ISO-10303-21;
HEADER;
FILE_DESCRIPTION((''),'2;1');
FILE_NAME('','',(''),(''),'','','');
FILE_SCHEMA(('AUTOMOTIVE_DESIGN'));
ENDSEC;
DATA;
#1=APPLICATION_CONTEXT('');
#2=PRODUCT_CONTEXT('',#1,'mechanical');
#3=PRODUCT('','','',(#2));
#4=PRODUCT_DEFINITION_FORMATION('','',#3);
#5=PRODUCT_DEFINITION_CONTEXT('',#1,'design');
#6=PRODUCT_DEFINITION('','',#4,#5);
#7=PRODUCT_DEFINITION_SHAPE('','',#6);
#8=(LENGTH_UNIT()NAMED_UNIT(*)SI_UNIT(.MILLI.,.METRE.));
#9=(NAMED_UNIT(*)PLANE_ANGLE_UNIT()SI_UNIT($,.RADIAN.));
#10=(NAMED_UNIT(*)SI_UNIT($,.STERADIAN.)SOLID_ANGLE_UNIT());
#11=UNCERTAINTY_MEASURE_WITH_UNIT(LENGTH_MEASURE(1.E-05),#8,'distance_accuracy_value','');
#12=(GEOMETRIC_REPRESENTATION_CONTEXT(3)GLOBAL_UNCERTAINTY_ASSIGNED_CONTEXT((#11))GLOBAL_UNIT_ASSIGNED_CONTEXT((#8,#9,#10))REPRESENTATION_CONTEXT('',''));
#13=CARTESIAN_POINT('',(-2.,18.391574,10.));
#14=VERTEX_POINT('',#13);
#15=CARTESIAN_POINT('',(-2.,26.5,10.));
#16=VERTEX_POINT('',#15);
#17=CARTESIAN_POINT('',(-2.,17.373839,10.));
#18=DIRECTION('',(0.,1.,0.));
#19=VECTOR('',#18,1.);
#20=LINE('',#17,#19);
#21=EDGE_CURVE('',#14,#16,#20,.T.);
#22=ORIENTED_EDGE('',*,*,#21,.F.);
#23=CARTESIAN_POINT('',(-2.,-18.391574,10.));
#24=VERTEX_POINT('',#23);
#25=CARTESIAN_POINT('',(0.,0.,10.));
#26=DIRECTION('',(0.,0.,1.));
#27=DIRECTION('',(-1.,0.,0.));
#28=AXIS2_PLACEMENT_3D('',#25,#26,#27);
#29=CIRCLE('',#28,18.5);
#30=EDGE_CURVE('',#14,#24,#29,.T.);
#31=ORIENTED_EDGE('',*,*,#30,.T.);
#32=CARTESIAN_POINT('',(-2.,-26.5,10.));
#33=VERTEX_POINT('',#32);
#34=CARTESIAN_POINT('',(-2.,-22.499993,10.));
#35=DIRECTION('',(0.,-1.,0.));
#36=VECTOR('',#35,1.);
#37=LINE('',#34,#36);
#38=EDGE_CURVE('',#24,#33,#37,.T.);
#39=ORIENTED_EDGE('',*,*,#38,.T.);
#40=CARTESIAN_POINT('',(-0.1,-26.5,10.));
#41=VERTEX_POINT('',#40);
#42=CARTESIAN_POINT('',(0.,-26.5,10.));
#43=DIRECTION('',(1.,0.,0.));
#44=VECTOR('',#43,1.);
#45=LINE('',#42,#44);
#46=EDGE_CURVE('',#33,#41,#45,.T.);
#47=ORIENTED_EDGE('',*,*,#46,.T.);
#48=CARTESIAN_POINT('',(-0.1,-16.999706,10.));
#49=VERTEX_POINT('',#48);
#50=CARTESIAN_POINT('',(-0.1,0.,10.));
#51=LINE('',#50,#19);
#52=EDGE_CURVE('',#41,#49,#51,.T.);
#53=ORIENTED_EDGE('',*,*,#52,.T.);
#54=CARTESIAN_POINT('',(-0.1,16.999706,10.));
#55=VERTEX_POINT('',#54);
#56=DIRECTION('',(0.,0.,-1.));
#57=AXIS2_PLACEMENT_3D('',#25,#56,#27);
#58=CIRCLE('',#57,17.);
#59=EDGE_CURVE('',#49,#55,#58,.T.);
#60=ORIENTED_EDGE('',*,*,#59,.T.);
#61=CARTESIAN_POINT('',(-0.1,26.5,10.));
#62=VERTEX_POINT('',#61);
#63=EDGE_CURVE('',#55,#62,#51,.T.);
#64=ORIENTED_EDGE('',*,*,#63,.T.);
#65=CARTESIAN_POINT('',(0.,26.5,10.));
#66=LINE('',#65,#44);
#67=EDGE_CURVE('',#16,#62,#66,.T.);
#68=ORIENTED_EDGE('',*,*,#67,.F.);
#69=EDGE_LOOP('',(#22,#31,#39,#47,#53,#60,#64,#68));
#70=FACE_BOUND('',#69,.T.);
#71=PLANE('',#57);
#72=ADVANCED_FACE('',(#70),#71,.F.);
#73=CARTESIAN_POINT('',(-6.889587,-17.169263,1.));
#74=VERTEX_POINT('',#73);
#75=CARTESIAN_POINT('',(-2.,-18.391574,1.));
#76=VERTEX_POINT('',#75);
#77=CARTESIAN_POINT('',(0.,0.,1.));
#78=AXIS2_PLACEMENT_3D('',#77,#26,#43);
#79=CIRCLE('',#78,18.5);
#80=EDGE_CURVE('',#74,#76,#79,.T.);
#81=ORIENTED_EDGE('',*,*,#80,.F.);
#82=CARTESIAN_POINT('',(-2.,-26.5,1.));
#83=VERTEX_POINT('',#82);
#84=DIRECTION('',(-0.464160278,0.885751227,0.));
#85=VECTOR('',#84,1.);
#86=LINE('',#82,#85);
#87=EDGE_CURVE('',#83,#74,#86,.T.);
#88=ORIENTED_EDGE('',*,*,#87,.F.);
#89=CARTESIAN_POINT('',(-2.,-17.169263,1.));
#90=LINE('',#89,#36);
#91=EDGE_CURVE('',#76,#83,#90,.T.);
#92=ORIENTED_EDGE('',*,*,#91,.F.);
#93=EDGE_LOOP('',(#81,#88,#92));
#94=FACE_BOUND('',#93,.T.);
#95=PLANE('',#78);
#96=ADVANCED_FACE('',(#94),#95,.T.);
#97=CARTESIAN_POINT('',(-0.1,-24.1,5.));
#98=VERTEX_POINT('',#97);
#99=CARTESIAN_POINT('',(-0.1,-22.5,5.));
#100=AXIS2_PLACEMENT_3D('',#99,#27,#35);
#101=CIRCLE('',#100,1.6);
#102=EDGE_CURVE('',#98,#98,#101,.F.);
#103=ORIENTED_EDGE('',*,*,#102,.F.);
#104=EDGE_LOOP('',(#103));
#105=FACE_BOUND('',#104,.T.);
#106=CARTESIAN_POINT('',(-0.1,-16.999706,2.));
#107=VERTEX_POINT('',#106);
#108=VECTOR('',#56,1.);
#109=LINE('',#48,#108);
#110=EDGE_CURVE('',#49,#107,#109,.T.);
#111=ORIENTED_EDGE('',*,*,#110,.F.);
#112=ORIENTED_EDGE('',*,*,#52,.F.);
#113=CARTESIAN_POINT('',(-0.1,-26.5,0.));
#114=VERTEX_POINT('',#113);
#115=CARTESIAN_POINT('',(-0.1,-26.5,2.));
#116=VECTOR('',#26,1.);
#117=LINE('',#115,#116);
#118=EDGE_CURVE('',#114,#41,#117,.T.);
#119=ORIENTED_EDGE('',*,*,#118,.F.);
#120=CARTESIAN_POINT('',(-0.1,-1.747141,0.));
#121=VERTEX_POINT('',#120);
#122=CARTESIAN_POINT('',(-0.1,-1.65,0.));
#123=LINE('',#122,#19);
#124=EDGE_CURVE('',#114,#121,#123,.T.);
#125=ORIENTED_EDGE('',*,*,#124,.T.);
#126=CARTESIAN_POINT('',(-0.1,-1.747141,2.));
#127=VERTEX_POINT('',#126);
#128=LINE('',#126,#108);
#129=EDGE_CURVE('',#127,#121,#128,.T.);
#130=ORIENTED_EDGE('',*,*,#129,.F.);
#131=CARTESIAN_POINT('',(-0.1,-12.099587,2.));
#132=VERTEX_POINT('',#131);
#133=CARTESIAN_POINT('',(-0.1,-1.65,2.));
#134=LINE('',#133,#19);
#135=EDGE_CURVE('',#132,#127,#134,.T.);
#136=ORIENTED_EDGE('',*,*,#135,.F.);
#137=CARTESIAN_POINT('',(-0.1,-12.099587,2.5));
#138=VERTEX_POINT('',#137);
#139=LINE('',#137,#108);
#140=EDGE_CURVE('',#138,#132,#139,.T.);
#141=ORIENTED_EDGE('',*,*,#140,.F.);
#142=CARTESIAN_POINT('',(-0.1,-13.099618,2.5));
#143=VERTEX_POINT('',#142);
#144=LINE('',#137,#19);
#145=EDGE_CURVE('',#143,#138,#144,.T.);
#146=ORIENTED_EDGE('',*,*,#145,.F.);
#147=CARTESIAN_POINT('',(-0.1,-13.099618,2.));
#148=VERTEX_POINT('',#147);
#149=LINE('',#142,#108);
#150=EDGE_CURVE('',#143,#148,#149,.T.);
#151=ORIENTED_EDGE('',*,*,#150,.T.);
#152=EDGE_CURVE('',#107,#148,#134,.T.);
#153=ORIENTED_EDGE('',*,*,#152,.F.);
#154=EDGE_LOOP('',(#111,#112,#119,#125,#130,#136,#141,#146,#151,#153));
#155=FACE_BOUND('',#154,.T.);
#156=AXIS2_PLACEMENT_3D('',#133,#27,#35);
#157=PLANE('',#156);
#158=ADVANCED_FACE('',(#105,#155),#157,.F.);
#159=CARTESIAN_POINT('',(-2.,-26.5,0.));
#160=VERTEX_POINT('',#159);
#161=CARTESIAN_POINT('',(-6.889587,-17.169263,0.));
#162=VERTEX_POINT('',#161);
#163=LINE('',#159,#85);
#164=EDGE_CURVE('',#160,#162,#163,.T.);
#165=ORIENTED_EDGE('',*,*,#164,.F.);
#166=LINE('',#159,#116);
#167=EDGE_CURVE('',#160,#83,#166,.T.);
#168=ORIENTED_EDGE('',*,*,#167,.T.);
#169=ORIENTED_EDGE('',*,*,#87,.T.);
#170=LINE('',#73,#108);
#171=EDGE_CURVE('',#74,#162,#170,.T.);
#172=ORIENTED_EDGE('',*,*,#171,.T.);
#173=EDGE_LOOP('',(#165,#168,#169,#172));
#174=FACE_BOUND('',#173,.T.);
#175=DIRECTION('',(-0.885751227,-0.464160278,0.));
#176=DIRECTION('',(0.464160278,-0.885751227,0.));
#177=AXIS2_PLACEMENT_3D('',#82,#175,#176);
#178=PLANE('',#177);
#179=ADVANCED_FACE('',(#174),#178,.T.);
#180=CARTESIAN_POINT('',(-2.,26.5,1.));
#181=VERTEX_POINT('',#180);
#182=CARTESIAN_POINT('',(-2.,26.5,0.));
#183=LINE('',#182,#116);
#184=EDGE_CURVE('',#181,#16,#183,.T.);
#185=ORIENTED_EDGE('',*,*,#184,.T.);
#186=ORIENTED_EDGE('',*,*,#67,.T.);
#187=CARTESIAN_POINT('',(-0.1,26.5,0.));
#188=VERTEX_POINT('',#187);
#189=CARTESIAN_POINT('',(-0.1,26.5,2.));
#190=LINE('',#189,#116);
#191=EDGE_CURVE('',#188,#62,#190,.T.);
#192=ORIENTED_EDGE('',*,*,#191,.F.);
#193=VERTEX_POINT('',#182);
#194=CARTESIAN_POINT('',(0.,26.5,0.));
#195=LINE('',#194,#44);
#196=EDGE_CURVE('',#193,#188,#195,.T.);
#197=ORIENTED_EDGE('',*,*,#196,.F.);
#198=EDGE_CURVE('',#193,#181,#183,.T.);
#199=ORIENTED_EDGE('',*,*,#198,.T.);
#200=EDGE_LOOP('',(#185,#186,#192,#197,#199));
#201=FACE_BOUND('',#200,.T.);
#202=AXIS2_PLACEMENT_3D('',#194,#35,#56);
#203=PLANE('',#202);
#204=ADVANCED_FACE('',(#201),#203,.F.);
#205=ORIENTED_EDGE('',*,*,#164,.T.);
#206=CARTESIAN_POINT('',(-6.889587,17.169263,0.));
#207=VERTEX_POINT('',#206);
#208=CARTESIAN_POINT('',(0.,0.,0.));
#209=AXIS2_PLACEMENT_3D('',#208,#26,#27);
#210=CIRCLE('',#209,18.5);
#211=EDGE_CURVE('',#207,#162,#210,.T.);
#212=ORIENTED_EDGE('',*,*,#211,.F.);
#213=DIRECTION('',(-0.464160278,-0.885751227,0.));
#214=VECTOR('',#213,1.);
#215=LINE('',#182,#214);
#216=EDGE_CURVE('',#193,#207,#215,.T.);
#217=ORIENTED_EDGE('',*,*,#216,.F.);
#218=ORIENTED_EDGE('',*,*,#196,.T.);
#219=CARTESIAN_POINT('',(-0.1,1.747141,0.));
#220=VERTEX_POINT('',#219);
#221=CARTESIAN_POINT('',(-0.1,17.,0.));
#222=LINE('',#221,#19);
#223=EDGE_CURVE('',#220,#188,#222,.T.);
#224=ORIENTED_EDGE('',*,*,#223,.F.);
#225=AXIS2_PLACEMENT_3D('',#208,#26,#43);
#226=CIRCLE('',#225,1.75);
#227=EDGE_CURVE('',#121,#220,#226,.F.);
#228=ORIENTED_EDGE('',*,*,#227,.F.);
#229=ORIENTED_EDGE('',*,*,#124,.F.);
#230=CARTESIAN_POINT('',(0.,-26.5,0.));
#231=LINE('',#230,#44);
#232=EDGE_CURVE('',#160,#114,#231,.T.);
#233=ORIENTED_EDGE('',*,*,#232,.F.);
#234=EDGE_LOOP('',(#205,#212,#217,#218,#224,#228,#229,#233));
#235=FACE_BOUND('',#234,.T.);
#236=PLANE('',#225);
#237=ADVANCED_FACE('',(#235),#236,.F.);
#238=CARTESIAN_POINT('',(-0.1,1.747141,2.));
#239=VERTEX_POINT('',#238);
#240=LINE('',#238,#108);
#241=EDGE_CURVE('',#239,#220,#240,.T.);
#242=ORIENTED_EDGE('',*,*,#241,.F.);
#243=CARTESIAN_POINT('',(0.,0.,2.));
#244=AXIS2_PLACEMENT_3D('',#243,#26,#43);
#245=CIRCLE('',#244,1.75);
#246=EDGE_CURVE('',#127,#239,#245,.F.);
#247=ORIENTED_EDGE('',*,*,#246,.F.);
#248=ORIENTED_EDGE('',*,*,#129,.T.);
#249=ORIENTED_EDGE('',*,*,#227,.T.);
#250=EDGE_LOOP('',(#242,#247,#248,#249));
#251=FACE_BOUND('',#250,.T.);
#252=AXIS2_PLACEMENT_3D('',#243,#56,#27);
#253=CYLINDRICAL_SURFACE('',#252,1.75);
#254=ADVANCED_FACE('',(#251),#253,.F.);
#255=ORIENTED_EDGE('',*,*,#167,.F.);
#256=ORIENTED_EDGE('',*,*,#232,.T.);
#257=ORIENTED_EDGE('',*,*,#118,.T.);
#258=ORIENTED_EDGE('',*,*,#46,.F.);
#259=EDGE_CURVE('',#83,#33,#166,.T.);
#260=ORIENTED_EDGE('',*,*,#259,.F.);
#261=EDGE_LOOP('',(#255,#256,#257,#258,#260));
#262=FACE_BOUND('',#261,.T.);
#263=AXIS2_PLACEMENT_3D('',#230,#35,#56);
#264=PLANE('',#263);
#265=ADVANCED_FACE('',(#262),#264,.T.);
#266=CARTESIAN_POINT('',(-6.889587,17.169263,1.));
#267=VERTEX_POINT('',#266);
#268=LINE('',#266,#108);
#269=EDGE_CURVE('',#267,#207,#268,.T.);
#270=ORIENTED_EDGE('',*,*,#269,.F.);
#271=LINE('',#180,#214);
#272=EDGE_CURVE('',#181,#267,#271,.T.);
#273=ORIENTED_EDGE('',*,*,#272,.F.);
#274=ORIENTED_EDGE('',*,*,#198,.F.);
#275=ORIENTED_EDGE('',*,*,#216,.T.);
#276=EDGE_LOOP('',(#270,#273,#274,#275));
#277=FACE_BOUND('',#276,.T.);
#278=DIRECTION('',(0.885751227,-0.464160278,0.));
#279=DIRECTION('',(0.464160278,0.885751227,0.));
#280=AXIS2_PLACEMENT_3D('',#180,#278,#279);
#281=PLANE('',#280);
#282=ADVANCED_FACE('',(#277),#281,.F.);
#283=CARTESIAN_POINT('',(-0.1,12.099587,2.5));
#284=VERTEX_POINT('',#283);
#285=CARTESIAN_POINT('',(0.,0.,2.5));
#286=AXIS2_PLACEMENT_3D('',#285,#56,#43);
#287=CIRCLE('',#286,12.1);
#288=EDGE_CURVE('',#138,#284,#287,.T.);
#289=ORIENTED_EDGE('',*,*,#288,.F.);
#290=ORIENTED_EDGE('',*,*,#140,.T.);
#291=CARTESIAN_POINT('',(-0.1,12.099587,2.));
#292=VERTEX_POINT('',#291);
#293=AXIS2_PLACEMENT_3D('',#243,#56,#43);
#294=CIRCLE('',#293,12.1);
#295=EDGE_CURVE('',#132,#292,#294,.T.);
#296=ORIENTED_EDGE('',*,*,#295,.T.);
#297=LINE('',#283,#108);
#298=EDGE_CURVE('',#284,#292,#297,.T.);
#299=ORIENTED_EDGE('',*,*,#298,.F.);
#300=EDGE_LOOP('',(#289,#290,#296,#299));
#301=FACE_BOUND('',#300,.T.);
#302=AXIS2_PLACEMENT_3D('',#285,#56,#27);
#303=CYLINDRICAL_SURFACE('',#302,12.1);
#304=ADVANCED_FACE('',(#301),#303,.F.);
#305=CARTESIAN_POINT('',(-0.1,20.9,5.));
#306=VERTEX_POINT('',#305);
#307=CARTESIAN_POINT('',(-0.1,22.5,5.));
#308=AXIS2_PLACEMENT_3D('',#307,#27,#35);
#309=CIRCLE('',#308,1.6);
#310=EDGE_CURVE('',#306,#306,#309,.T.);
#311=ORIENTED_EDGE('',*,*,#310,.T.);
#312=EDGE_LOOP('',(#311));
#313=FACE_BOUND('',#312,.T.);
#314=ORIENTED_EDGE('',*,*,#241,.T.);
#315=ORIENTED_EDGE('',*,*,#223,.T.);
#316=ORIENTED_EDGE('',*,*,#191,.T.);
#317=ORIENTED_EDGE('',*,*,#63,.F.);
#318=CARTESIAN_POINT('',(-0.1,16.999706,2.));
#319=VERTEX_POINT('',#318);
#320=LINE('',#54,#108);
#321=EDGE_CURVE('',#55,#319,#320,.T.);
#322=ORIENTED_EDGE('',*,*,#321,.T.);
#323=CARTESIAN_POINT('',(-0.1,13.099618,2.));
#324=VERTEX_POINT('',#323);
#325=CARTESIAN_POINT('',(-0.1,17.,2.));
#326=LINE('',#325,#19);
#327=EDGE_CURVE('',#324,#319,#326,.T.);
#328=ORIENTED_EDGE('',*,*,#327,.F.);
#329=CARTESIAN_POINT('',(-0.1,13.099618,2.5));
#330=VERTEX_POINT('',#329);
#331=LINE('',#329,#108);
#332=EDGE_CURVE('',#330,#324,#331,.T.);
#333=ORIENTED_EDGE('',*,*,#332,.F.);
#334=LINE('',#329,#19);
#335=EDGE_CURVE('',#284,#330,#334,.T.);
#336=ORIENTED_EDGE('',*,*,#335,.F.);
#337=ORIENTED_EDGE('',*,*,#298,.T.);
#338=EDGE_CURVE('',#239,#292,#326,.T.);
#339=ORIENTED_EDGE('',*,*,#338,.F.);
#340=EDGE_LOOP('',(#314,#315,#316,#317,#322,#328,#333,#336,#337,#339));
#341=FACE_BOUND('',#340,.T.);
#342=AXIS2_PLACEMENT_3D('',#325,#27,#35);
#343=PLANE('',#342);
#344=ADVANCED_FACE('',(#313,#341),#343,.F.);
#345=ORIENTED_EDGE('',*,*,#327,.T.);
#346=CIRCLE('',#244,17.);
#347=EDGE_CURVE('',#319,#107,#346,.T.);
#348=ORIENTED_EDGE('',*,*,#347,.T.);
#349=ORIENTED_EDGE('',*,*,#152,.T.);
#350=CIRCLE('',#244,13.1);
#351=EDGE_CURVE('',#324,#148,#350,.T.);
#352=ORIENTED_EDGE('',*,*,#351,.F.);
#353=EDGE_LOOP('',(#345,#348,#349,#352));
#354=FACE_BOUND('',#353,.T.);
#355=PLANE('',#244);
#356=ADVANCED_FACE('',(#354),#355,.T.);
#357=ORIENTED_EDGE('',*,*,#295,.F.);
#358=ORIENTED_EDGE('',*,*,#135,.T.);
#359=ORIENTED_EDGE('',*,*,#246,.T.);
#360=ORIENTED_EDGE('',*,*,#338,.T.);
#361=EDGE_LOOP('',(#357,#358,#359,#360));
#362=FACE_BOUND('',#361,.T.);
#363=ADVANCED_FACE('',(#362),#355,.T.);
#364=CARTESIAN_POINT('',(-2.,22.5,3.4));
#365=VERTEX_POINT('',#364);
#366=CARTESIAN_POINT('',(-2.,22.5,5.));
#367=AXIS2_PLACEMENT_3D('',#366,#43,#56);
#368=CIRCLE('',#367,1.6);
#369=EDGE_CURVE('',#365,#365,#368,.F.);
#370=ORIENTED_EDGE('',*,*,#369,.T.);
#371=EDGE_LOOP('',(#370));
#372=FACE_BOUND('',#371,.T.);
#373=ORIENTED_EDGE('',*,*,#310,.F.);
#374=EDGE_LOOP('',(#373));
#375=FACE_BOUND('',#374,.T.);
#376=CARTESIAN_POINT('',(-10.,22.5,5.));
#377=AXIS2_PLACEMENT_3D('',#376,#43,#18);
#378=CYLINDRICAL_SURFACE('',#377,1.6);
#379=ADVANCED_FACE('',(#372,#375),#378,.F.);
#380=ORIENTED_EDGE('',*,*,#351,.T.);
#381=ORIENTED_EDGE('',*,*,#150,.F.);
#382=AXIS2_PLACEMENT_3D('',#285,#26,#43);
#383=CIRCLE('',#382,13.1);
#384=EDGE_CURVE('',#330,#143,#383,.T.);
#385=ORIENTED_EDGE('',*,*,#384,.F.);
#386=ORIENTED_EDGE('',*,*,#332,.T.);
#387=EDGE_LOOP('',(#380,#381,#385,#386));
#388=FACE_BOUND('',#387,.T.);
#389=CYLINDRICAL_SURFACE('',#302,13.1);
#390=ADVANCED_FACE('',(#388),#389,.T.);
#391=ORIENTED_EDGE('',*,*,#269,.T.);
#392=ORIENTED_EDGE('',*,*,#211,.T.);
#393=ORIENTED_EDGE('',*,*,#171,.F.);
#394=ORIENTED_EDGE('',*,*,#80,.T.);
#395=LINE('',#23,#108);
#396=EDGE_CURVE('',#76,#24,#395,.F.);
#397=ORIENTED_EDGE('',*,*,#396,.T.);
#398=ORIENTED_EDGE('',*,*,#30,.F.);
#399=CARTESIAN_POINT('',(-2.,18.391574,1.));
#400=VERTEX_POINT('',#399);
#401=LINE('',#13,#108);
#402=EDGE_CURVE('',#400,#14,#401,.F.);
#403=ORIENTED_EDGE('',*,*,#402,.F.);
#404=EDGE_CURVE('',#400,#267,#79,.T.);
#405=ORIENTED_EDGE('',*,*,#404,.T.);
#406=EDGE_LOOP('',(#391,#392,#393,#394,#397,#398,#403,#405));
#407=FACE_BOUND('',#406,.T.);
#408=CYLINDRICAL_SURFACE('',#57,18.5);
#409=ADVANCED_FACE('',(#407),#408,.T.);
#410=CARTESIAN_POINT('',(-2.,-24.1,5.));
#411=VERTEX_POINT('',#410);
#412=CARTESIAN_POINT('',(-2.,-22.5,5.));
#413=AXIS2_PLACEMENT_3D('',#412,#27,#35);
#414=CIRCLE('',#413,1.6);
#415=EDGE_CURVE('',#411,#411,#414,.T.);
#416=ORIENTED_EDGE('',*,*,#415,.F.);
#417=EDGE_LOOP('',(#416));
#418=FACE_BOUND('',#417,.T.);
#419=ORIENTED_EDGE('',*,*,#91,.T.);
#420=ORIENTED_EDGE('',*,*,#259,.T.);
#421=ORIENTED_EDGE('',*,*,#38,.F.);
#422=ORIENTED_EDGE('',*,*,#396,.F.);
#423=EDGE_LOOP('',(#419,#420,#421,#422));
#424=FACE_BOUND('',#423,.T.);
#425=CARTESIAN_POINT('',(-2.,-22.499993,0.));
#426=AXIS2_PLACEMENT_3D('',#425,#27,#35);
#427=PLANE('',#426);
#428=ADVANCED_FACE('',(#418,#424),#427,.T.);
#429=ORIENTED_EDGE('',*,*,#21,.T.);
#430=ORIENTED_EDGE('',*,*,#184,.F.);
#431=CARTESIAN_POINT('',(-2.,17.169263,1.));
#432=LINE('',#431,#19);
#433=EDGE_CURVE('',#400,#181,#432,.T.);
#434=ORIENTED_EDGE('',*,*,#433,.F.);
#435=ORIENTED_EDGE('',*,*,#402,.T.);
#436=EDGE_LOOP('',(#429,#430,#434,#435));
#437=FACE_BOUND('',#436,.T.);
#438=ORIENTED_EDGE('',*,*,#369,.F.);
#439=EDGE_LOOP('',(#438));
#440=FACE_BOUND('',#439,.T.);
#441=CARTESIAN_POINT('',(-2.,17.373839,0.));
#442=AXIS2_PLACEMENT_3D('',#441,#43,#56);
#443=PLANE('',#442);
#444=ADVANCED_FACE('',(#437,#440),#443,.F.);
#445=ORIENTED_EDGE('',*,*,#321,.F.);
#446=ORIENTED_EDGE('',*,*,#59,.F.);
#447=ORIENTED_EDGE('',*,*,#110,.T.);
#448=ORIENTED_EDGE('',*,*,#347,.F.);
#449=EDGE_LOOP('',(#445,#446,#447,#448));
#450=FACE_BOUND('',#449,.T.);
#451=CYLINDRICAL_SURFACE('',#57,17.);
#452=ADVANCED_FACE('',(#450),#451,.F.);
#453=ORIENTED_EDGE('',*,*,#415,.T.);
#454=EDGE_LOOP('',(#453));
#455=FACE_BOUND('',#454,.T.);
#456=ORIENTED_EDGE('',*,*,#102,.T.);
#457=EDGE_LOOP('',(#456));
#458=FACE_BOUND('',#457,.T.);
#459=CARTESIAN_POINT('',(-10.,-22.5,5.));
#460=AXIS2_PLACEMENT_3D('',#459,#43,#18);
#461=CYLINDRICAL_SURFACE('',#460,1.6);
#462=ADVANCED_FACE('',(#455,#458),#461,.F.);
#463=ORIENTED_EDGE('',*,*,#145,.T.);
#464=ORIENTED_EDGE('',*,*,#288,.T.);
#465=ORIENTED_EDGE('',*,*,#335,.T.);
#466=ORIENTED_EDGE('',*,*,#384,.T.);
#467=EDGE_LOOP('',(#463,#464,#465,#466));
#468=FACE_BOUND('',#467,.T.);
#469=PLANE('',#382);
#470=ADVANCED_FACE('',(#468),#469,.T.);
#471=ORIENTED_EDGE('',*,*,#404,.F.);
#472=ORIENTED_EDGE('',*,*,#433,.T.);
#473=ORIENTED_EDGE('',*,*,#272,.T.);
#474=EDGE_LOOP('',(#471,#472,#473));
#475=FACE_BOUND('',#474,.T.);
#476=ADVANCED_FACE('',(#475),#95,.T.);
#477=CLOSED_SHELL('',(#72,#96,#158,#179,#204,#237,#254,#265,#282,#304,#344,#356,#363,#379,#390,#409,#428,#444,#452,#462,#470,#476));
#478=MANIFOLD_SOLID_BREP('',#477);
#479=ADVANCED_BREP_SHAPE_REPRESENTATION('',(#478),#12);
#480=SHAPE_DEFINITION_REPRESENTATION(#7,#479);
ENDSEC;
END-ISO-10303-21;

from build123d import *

# Parameters (mm, degrees)
BOSS_EXTRUDE1_DEPTH = 2
BOSS_EXTRUDE2_DEPTH = 10
BOSS_EXTRUDE3_DEPTH = 10
SKETCH3_R           = 1.6
CUT_EXTRUDE1_DEPTH  = 10
BOSS_EXTRUDE4_DEPTH = 1
MOVE_FACE1_DEPTH    = 10
BOSS_EXTRUDE5_DEPTH = 0.5


# Read off the part's stored shape, not the designer's step: Move Face1
with BuildPart() as part:
    # Sketch1 → Boss-Extrude1 (new body)
    with BuildSketch(Plane.XY):
        with BuildLine():
            Line((0, 17), (0, 1.65))
            ThreePointArc((0, 1.65), (-1.65, 0), (0, -1.65))
            Line((0, -1.65), (0, -17))
            ThreePointArc((0, -17), (-17, 0), (0, 17))
        make_face()
    extrude(amount=BOSS_EXTRUDE1_DEPTH)

    # Sketch2 → Boss-Extrude2 (add)
    with BuildSketch(Plane.XY):
        with BuildLine():
            Line((0, 17), (0, 18.5))
            ThreePointArc((0, 18.5), (-18.5, 0), (0, -18.5))
            Line((0, -18.5), (0, -17))
            ThreePointArc((0, -17), (-17, 0), (0, 17))
        make_face()
    extrude(amount=BOSS_EXTRUDE2_DEPTH)

    # Sketch4 → Boss-Extrude3 (add)
    with BuildSketch(Plane.XY.offset(10)):
        Polygon((0, -18.5), (-1.127101366, -17.373839009), (-2, -17.373839009), (-2, -22.499993139), (-2, -26.5), (0, -26.5), align=None)
    boss_extrude3 = extrude(amount=-BOSS_EXTRUDE3_DEPTH)

    # Sketch3 → Cut-Extrude1 (cut)
    with BuildSketch(Plane(origin=(0, 0, 0), x_dir=(0, 0, -1), z_dir=(1, 0, 0))):
        with Locations(Location((-5, -22.5, 0), (0, 0, 90))):
            Circle(SKETCH3_R)
    cut_extrude1 = extrude(amount=-CUT_EXTRUDE1_DEPTH, mode=Mode.SUBTRACT)

    # Sketch5 → Boss-Extrude4 (add)
    with BuildSketch(Plane(origin=(0, 0, 0), x_dir=(-1, 0, 0), z_dir=(0, 0, -1))):
        Polygon((2, -26.5), (6.889586723, -17.169263082), (2, -17.169263082), align=None)
    boss_extrude4 = extrude(amount=-BOSS_EXTRUDE4_DEPTH)

    # Mirror1: Boss-Extrude3, Cut-Extrude1, Boss-Extrude4 across plane
    add(boss_extrude3.mirror(Plane.ZX))
    add(cut_extrude1.mirror(Plane.ZX), mode=Mode.SUBTRACT)
    add(boss_extrude4.mirror(Plane.ZX))

    # Move Face1 outline → Move Face1 (cut)
    with BuildSketch(Plane.XY):
        with BuildLine():
            ThreePointArc((-0.1, 1.747140521), (-1.75, 0), (-0.1, -1.747140521))
            Line((-0.1, -1.747140521), (-0.1, -26.5))
            Line((-0.1, -26.5), (0, -26.5))
            Line((0, -26.5), (0, -1.65))
            ThreePointArc((0, -1.65), (-1.65, 0), (0, 1.65))
            Line((0, 1.65), (0, 26.5))
            Line((0, 26.5), (-0.1, 26.5))
            Line((-0.1, 26.5), (-0.1, 1.747140521))
        make_face()
    extrude(amount=MOVE_FACE1_DEPTH, mode=Mode.SUBTRACT)

    # Sketch6 → Boss-Extrude5 (add)
    with BuildSketch(Plane.XY.offset(2)):
        with BuildLine():
            Line((-0.1, 13.099618315), (-0.1, 12.09958677))
            ThreePointArc((-0.1, 12.09958677), (-12.1, 0), (-0.1, -12.09958677))
            Line((-0.1, -12.09958677), (-0.1, -13.099618315))
            ThreePointArc((-0.1, -13.099618315), (-13.1, 0), (-0.1, 13.099618315))
        make_face()
    extrude(amount=BOSS_EXTRUDE5_DEPTH)


solid = part.part
